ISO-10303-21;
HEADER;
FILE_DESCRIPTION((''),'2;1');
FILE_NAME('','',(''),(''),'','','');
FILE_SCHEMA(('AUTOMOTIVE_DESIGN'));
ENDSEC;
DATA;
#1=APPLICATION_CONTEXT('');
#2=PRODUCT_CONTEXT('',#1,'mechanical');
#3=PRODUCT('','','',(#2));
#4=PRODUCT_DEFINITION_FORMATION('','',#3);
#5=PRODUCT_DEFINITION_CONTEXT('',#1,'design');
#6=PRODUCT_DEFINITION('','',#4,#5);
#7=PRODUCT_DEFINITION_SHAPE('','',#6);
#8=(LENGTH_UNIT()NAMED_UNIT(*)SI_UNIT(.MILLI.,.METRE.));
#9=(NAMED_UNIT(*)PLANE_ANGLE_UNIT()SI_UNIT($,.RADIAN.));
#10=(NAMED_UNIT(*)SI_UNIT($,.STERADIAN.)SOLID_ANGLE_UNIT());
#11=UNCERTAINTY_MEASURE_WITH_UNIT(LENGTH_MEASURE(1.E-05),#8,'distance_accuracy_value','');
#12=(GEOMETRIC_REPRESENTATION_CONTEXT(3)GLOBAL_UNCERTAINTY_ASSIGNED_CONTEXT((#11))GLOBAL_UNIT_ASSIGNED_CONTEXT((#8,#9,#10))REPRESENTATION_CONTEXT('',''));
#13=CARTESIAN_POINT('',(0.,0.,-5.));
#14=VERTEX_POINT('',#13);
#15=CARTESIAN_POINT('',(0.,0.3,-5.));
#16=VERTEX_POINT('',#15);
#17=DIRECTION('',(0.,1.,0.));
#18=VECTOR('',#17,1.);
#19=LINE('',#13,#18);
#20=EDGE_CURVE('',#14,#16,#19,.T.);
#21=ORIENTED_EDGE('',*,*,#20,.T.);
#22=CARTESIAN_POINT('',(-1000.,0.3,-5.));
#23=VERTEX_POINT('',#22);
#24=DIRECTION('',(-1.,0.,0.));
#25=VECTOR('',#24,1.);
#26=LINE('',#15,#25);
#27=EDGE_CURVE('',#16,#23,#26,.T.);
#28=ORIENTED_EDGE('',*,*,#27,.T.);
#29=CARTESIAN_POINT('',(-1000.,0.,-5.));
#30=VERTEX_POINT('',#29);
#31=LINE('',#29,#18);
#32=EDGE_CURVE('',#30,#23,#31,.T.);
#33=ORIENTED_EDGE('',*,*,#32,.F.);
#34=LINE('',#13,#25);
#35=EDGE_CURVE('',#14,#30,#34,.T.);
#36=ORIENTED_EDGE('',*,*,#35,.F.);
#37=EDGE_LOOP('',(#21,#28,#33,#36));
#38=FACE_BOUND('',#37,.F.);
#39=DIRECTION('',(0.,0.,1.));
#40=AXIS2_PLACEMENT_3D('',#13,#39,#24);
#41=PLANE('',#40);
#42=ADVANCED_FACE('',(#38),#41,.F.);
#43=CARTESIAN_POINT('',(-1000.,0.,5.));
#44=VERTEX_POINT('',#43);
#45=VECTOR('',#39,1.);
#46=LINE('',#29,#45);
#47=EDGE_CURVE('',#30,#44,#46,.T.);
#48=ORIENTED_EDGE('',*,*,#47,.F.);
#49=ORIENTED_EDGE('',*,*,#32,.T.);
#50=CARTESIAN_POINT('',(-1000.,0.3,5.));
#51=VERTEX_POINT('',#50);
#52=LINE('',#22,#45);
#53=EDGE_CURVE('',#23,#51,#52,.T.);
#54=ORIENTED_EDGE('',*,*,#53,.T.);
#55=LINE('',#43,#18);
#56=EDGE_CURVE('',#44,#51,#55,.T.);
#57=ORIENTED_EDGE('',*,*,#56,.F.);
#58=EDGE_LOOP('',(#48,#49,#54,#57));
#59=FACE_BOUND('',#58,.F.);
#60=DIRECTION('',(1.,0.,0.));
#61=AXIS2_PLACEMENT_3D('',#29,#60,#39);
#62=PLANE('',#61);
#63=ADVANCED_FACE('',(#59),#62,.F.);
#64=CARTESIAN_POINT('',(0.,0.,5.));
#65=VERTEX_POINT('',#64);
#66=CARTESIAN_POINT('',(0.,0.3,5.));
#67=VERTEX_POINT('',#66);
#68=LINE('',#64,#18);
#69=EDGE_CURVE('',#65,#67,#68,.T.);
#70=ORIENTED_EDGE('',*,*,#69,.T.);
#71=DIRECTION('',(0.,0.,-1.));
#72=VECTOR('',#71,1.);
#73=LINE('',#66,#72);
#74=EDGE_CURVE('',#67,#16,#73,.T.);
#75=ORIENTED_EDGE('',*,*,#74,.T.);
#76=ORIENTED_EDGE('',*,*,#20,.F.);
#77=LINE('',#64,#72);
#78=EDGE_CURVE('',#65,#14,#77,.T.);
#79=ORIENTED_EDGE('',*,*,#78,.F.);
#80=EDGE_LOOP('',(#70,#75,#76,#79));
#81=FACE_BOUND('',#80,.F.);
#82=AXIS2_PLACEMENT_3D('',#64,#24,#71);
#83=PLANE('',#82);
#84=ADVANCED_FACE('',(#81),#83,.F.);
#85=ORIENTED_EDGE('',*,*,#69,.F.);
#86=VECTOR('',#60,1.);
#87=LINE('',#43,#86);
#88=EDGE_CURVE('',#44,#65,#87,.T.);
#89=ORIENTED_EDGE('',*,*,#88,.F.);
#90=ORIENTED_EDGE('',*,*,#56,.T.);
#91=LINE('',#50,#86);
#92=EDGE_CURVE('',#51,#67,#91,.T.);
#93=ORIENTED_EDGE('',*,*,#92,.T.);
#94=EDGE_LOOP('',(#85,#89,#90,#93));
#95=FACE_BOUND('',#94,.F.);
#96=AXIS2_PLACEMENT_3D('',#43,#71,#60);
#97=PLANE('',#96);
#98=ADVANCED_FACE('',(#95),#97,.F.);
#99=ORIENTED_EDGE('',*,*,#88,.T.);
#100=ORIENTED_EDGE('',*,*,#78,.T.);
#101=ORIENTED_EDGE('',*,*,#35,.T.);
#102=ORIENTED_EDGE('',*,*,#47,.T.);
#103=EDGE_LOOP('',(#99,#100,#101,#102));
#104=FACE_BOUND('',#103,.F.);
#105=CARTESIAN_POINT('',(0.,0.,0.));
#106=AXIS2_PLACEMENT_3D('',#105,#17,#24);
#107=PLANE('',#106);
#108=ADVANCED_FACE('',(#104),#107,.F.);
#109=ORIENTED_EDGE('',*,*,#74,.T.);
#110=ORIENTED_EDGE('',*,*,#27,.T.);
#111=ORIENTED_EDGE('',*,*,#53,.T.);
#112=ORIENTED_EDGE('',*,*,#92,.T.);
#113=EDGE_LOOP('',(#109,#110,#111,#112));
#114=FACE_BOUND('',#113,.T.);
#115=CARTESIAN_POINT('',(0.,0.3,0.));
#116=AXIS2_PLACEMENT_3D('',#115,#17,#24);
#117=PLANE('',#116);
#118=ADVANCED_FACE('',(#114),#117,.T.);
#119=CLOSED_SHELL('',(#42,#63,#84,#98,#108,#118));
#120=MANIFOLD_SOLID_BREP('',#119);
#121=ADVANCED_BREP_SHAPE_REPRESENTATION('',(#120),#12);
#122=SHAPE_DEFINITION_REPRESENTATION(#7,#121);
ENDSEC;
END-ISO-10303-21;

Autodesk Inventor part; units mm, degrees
ref_plane "YZ Plane" through (0, 0, 0) normal (1, 0, 0) x (0, 1, 0)
ref_plane "XZ Plane" through (0, 0, 0) normal (0, 1, 0) x (-1, 0, 0)
ref_plane "XY Plane" through (0, 0, 0) normal (0, 0, 1) x (1, 0, 0)
sketch "PCB_Pad" plane through (0, 0, 0) normal (0, 0, 1) x (1, 0, 0)
  circle A0 centre (6.811, 24.8402) radius 0.375
  arc A1 (6.186, 25.7152) -> (6.186, 23.9652) centre (6.186, 24.8402) ccw
  line L0 (6.186, 25.7152) -> (7.436, 25.7152)
  line L1 (6.186, 23.9652) -> (7.436, 23.9652)
  arc A2 (7.436, 23.9652) -> (7.436, 25.7152) centre (7.436, 24.8402) ccw
  line L2 (6.811, 25.7152) -> (6.811, 23.9652) construction
  line L3 (5.311, 24.8402) -> (8.311, 24.8402) construction
  point P0 (6.811, 24.8402)
  dimension "d12" = 3
  dimension "d13" = 0.75
  dimension "d14" = 1.75
sketch "PCB_Pad_Group" plane through (0, 0, 0) normal (0, 0, 1) x (1, 0, 0)
  circle A0 centre (6.4629, 25.645) radius 0.375
  arc A1 (5.8379, 26.52) -> (5.8379, 24.77) centre (5.8379, 25.645) ccw
  line L0 (5.8379, 26.52) -> (7.0879, 26.52)
  line L1 (5.8379, 24.77) -> (7.0879, 24.77)
  arc A2 (7.0879, 24.77) -> (7.0879, 26.52) centre (7.0879, 25.645) ccw
  line L2 (6.4629, 26.52) -> (6.4629, 24.77) construction
  line L3 (4.9629, 25.645) -> (7.9629, 25.645) construction
  circle A3 centre (10.0629, 25.645) radius 0.375
  arc A4 (9.4379, 26.52) -> (9.4379, 24.77) centre (9.4379, 25.645) ccw
  line L4 (9.4379, 26.52) -> (10.6879, 26.52)
  line L5 (9.4379, 24.77) -> (10.6879, 24.77)
  arc A5 (10.6879, 24.77) -> (10.6879, 26.52) centre (10.6879, 25.645) ccw
  line L6 (10.0629, 26.52) -> (10.0629, 24.77) construction
  line L7 (8.5629, 25.645) -> (11.5629, 25.645) construction
  circle A6 centre (10.0629, 22.645) radius 0.375
  arc A7 (9.4379, 23.52) -> (9.4379, 21.77) centre (9.4379, 22.645) ccw
  line L8 (9.4379, 23.52) -> (10.6879, 23.52)
  line L9 (9.4379, 21.77) -> (10.6879, 21.77)
  arc A8 (10.6879, 21.77) -> (10.6879, 23.52) centre (10.6879, 22.645) ccw
  line L10 (10.0629, 23.52) -> (10.0629, 21.77) construction
  line L11 (8.5629, 22.645) -> (11.5629, 22.645) construction
  circle A9 centre (10.0629, 19.645) radius 0.375
  arc A10 (9.4379, 20.52) -> (9.4379, 18.77) centre (9.4379, 19.645) ccw
  line L12 (9.4379, 20.52) -> (10.6879, 20.52)
  line L13 (9.4379, 18.77) -> (10.6879, 18.77)
  arc A11 (10.6879, 18.77) -> (10.6879, 20.52) centre (10.6879, 19.645) ccw
  line L14 (10.0629, 20.52) -> (10.0629, 18.77) construction
  line L15 (8.5629, 19.645) -> (11.5629, 19.645) construction
  circle A12 centre (6.4629, 19.645) radius 0.375
  arc A13 (5.8379, 20.52) -> (5.8379, 18.77) centre (5.8379, 19.645) ccw
  line L16 (5.8379, 20.52) -> (7.0879, 20.52)
  line L17 (5.8379, 18.77) -> (7.0879, 18.77)
  arc A14 (7.0879, 18.77) -> (7.0879, 20.52) centre (7.0879, 19.645) ccw
  line L18 (6.4629, 20.52) -> (6.4629, 18.77) construction
  line L19 (4.9629, 19.645) -> (7.9629, 19.645) construction
  circle A15 centre (6.4629, 22.645) radius 0.375
  arc A16 (5.8379, 23.52) -> (5.8379, 21.77) centre (5.8379, 22.645) ccw
  line L20 (5.8379, 23.52) -> (7.0879, 23.52)
  line L21 (5.8379, 21.77) -> (7.0879, 21.77)
  arc A17 (7.0879, 21.77) -> (7.0879, 23.52) centre (7.0879, 22.645) ccw
  line L22 (6.4629, 23.52) -> (6.4629, 21.77) construction
  line L23 (4.9629, 22.645) -> (7.9629, 22.645) construction
  point P0 (8.2629, 22.645)
  dimension "d15" = 3
  dimension "d16" = 3
  dimension "d17" = 3.6
sketch "1m_Outline" plane through (0, 0, 0) normal (0, 0, 1) x (1, 0, 0)
  line L0 (0, 0) -> (1000, 0)
  line L1 (1000, 0) -> (1000, 10)
  line L2 (1000, 10) -> (0, 10)
  line L3 (0, 10) -> (0, 0)
  line L4 (0, 5) -> (1000, 5) construction
  point P0 (500.9843, 5)
  dimension "d0" = 1000
  dimension "d1" = 10
sketch "LED_5050" plane through (0, 0, 0) normal (0, 0, 1) x (1, 0, 0)
  line L0 (7.6271, 7.5) -> (12.6271, 7.5)
  line L1 (12.6271, 7.5) -> (12.6271, 2.5)
  line L2 (12.6271, 2.5) -> (7.6271, 2.5)
  line L3 (7.6271, 2.5) -> (7.6271, 7.5)
  line L4 (7.6271, 7.5) -> (12.6271, 7.5)
  line L5 (12.6271, 7.5) -> (12.6271, 9)
  line L6 (12.6271, 9) -> (7.6271, 9)
  line L7 (7.6271, 9) -> (7.6271, 7.5)
  line L8 (7.6271, 2.5) -> (12.6271, 2.5)
  line L9 (12.6271, 2.5) -> (12.6271, 1)
  line L10 (12.6271, 1) -> (7.6271, 1)
  line L11 (7.6271, 1) -> (7.6271, 2.5)
  point P0 (10.0557, 4.9286)
  point P1 (7.6271, 5)
  dimension "d2" = 5
  dimension "d3" = 5
  dimension "d5" = 1.5
sketch "Cap_1206" plane through (0, 0, 0) normal (0, 0, 1) x (1, 0, 0)
  line L0 (14.0271, 6.6) -> (15.6271, 6.6)
  line L1 (15.6271, 6.6) -> (15.6271, 3.4)
  line L2 (15.6271, 3.4) -> (14.0271, 3.4)
  line L3 (14.0271, 3.4) -> (14.0271, 6.6)
  line L4 (14.0271, 6.6) -> (15.6271, 6.6)
  line L5 (15.6271, 6.6) -> (15.6271, 8.1)
  line L6 (15.6271, 8.1) -> (14.0271, 8.1)
  line L7 (14.0271, 8.1) -> (14.0271, 6.6)
  line L8 (14.0271, 3.4) -> (15.6271, 3.4)
  line L9 (15.6271, 3.4) -> (15.6271, 1.9)
  line L10 (15.6271, 1.9) -> (14.0271, 1.9)
  line L11 (14.0271, 1.9) -> (14.0271, 3.4)
  point P0 (14.8692, 5)
  point P1 (14.0271, 5)
  dimension "d6" = 1.6
  dimension "d7" = 3.2
sketch "LED_Repeating_Unit" plane through (0, 0, 0) normal (0, 0, 1) x (1, 0, 0)
  circle A0 centre (18.0271, 8) radius 0.375
  arc A1 (17.4021, 8.875) -> (17.4021, 7.125) centre (17.4021, 8) ccw
  line L0 (17.4021, 8.875) -> (18.6521, 8.875)
  line L1 (17.4021, 7.125) -> (18.6521, 7.125)
  arc A2 (18.6521, 7.125) -> (18.6521, 8.875) centre (18.6521, 8) ccw
  line L2 (18.0271, 8.875) -> (18.0271, 7.125) construction
  line L3 (16.5271, 8) -> (19.5271, 8) construction
  circle A3 centre (21.6271, 8) radius 0.375
  arc A4 (21.0021, 8.875) -> (21.0021, 7.125) centre (21.0021, 8) ccw
  line L4 (21.0021, 8.875) -> (22.2521, 8.875)
  line L5 (21.0021, 7.125) -> (22.2521, 7.125)
  arc A5 (22.2521, 7.125) -> (22.2521, 8.875) centre (22.2521, 8) ccw
  line L6 (21.6271, 8.875) -> (21.6271, 7.125) construction
  line L7 (20.1271, 8) -> (23.1271, 8) construction
  circle A6 centre (21.6271, 5) radius 0.375
  arc A7 (21.0021, 5.875) -> (21.0021, 4.125) centre (21.0021, 5) ccw
  line L8 (21.0021, 5.875) -> (22.2521, 5.875)
  line L9 (21.0021, 4.125) -> (22.2521, 4.125)
  arc A8 (22.2521, 4.125) -> (22.2521, 5.875) centre (22.2521, 5) ccw
  line L10 (21.6271, 5.875) -> (21.6271, 4.125) construction
  line L11 (20.1271, 5) -> (23.1271, 5) construction
  circle A9 centre (21.6271, 2) radius 0.375
  arc A10 (21.0021, 2.875) -> (21.0021, 1.125) centre (21.0021, 2) ccw
  line L12 (21.0021, 2.875) -> (22.2521, 2.875)
  line L13 (21.0021, 1.125) -> (22.2521, 1.125)
  arc A11 (22.2521, 1.125) -> (22.2521, 2.875) centre (22.2521, 2) ccw
  line L14 (21.6271, 2.875) -> (21.6271, 1.125) construction
  line L15 (20.1271, 2) -> (23.1271, 2) construction
  circle A12 centre (18.0271, 2) radius 0.375
  arc A13 (17.4021, 2.875) -> (17.4021, 1.125) centre (17.4021, 2) ccw
  line L16 (17.4021, 2.875) -> (18.6521, 2.875)
  line L17 (17.4021, 1.125) -> (18.6521, 1.125)
  arc A14 (18.6521, 1.125) -> (18.6521, 2.875) centre (18.6521, 2) ccw
  line L18 (18.0271, 2.875) -> (18.0271, 1.125) construction
  line L19 (16.5271, 2) -> (19.5271, 2) construction
  circle A15 centre (18.0271, 5) radius 0.375
  arc A16 (17.4021, 5.875) -> (17.4021, 4.125) centre (17.4021, 5) ccw
  line L20 (17.4021, 5.875) -> (18.6521, 5.875)
  line L21 (17.4021, 4.125) -> (18.6521, 4.125)
  arc A17 (18.6521, 4.125) -> (18.6521, 5.875) centre (18.6521, 5) ccw
  line L22 (18.0271, 5.875) -> (18.0271, 4.125) construction
  line L23 (16.5271, 5) -> (19.5271, 5) construction
  line L24 (7.6271, 7.5) -> (12.6271, 7.5)
  line L25 (12.6271, 7.5) -> (12.6271, 2.5)
  line L26 (12.6271, 2.5) -> (7.6271, 2.5)
  line L27 (7.6271, 2.5) -> (7.6271, 7.5)
  line L28 (7.6271, 7.5) -> (12.6271, 7.5)
  line L29 (12.6271, 7.5) -> (12.6271, 9)
  line L30 (12.6271, 9) -> (7.6271, 9)
  line L31 (7.6271, 9) -> (7.6271, 7.5)
  line L32 (7.6271, 2.5) -> (12.6271, 2.5)
  line L33 (12.6271, 2.5) -> (12.6271, 1)
  line L34 (12.6271, 1) -> (7.6271, 1)
  line L35 (7.6271, 1) -> (7.6271, 2.5)
  line L36 (14.0271, 6.6) -> (15.6271, 6.6)
  line L37 (15.6271, 6.6) -> (15.6271, 3.4)
  line L38 (15.6271, 3.4) -> (14.0271, 3.4)
  line L39 (14.0271, 3.4) -> (14.0271, 6.6)
  line L40 (14.0271, 6.6) -> (15.6271, 6.6)
  line L41 (15.6271, 6.6) -> (15.6271, 8.1)
  line L42 (15.6271, 8.1) -> (14.0271, 8.1)
  line L43 (14.0271, 8.1) -> (14.0271, 6.6)
  line L44 (14.0271, 3.4) -> (15.6271, 3.4)
  line L45 (15.6271, 3.4) -> (15.6271, 1.9)
  line L46 (15.6271, 1.9) -> (14.0271, 1.9)
  line L47 (14.0271, 1.9) -> (14.0271, 3.4)
  point P0 (14.9174, 4.9762)
  dimension "d18" = 8
  dimension "d19" = 15.5
sketch "Flex-PCB" plane through (0, 0, 0) normal (0, 1, 0) x (-1, 0, 0)
  line L0 (0, -5) -> (1000, -5)
  line L1 (1000, -5) -> (1000, 5)
  line L2 (1000, 5) -> (0, 5)
  line L3 (0, 5) -> (0, -5)
  line L4 (0, 0) -> (1000, 0) construction
extrude "Flex-PCB Extrusion" add sketch "Flex-PCB" along normal blind 0.3
sketch "Sketch3" plane through (0, 0.3, 0) normal (0, 1, 0) x (1, 0, 0)
  line L0 (0, 5) -> (-1000, 5) projected
  line L1 (-1000, 5) -> (-1000, -5) projected
  line L2 (-1000, -5) -> (0, -5) projected
  line L3 (0, -5) -> (0, 5) projected
  line L4 (0, 0) -> (6.1653, 0) construction
  circle A0 centre (-2.1, 3) radius 0.375
  arc A1 (-2.725, 3.875) -> (-2.725, 2.125) centre (-2.725, 3) ccw
  line L5 (-2.725, 3.875) -> (-1.475, 3.875)
  line L6 (-2.725, 2.125) -> (-1.475, 2.125)
  arc A2 (-1.475, 2.125) -> (-1.475, 3.875) centre (-1.475, 3) ccw
  line L7 (-2.1, 3.875) -> (-2.1, 2.125) construction
  line L8 (-3.6, 3) -> (-0.6, 3) construction
  circle A3 centre (1.5, 3) radius 0.375
  arc A4 (0.875, 3.875) -> (0.875, 2.125) centre (0.875, 3) ccw
  line L9 (0.875, 3.875) -> (2.125, 3.875)
  line L10 (0.875, 2.125) -> (2.125, 2.125)
  arc A5 (2.125, 2.125) -> (2.125, 3.875) centre (2.125, 3) ccw
  line L11 (1.5, 3.875) -> (1.5, 2.125) construction
  line L12 (0, 3) -> (3, 3) construction
  circle A6 centre (1.5, 0) radius 0.375
  arc A7 (0.875, 0.875) -> (0.875, -0.875) centre (0.875, 0) ccw
  line L13 (0.875, 0.875) -> (2.125, 0.875)
  line L14 (0.875, -0.875) -> (2.125, -0.875)
  arc A8 (2.125, -0.875) -> (2.125, 0.875) centre (2.125, 0) ccw
  line L15 (1.5, 0.875) -> (1.5, -0.875) construction
  line L16 (0, 0) -> (3, 0) construction
  circle A9 centre (1.5, -3) radius 0.375
  arc A10 (0.875, -2.125) -> (0.875, -3.875) centre (0.875, -3) ccw
  line L17 (0.875, -2.125) -> (2.125, -2.125)
  line L18 (0.875, -3.875) -> (2.125, -3.875)
  arc A11 (2.125, -3.875) -> (2.125, -2.125) centre (2.125, -3) ccw
  line L19 (1.5, -2.125) -> (1.5, -3.875) construction
  line L20 (0, -3) -> (3, -3) construction
  circle A12 centre (-2.1, -3) radius 0.375
  arc A13 (-2.725, -2.125) -> (-2.725, -3.875) centre (-2.725, -3) ccw
  line L21 (-2.725, -2.125) -> (-1.475, -2.125)
  line L22 (-2.725, -3.875) -> (-1.475, -3.875)
  arc A14 (-1.475, -3.875) -> (-1.475, -2.125) centre (-1.475, -3) ccw
  line L23 (-2.1, -2.125) -> (-2.1, -3.875) construction
  line L24 (-3.6, -3) -> (-0.6, -3) construction
  circle A15 centre (-2.1, 0) radius 0.375
  arc A16 (-2.725, 0.875) -> (-2.725, -0.875) centre (-2.725, 0) ccw
  line L25 (-2.725, 0.875) -> (-1.475, 0.875)
  line L26 (-2.725, -0.875) -> (-1.475, -0.875)
  arc A17 (-1.475, -0.875) -> (-1.475, 0.875) centre (-1.475, 0) ccw
  line L27 (-2.1, 0.875) -> (-2.1, -0.875) construction
  line L28 (-3.6, 0) -> (-0.6, 0) construction
  line L29 (-12.5, 2.5) -> (-7.5, 2.5)
  line L30 (-7.5, 2.5) -> (-7.5, -2.5)
  line L31 (-7.5, -2.5) -> (-12.5, -2.5)
  line L32 (-12.5, -2.5) -> (-12.5, 2.5)
  line L33 (-12.5, 2.5) -> (-7.5, 2.5)
  line L34 (-7.5, 2.5) -> (-7.5, 4)
  line L35 (-7.5, 4) -> (-12.5, 4)
  line L36 (-12.5, 4) -> (-12.5, 2.5)
  line L37 (-12.5, -2.5) -> (-7.5, -2.5)
  line L38 (-7.5, -2.5) -> (-7.5, -4)
  line L39 (-7.5, -4) -> (-12.5, -4)
  line L40 (-12.5, -4) -> (-12.5, -2.5)
  line L41 (-6.1, 1.6) -> (-4.5, 1.6)
  line L42 (-4.5, 1.6) -> (-4.5, -1.6)
  line L43 (-4.5, -1.6) -> (-6.1, -1.6)
  line L44 (-6.1, -1.6) -> (-6.1, 1.6)
  line L45 (-6.1, 1.6) -> (-4.5, 1.6)
  line L46 (-4.5, 1.6) -> (-4.5, 3.1)
  line L47 (-4.5, 3.1) -> (-6.1, 3.1)
  line L48 (-6.1, 3.1) -> (-6.1, 1.6)
  line L49 (-6.1, -1.6) -> (-4.5, -1.6)
  line L50 (-4.5, -1.6) -> (-4.5, -3.1)
  line L51 (-4.5, -3.1) -> (-6.1, -3.1)
  line L52 (-6.1, -3.1) -> (-6.1, -1.6)
properties part number "ledstrip-60led-5050"
